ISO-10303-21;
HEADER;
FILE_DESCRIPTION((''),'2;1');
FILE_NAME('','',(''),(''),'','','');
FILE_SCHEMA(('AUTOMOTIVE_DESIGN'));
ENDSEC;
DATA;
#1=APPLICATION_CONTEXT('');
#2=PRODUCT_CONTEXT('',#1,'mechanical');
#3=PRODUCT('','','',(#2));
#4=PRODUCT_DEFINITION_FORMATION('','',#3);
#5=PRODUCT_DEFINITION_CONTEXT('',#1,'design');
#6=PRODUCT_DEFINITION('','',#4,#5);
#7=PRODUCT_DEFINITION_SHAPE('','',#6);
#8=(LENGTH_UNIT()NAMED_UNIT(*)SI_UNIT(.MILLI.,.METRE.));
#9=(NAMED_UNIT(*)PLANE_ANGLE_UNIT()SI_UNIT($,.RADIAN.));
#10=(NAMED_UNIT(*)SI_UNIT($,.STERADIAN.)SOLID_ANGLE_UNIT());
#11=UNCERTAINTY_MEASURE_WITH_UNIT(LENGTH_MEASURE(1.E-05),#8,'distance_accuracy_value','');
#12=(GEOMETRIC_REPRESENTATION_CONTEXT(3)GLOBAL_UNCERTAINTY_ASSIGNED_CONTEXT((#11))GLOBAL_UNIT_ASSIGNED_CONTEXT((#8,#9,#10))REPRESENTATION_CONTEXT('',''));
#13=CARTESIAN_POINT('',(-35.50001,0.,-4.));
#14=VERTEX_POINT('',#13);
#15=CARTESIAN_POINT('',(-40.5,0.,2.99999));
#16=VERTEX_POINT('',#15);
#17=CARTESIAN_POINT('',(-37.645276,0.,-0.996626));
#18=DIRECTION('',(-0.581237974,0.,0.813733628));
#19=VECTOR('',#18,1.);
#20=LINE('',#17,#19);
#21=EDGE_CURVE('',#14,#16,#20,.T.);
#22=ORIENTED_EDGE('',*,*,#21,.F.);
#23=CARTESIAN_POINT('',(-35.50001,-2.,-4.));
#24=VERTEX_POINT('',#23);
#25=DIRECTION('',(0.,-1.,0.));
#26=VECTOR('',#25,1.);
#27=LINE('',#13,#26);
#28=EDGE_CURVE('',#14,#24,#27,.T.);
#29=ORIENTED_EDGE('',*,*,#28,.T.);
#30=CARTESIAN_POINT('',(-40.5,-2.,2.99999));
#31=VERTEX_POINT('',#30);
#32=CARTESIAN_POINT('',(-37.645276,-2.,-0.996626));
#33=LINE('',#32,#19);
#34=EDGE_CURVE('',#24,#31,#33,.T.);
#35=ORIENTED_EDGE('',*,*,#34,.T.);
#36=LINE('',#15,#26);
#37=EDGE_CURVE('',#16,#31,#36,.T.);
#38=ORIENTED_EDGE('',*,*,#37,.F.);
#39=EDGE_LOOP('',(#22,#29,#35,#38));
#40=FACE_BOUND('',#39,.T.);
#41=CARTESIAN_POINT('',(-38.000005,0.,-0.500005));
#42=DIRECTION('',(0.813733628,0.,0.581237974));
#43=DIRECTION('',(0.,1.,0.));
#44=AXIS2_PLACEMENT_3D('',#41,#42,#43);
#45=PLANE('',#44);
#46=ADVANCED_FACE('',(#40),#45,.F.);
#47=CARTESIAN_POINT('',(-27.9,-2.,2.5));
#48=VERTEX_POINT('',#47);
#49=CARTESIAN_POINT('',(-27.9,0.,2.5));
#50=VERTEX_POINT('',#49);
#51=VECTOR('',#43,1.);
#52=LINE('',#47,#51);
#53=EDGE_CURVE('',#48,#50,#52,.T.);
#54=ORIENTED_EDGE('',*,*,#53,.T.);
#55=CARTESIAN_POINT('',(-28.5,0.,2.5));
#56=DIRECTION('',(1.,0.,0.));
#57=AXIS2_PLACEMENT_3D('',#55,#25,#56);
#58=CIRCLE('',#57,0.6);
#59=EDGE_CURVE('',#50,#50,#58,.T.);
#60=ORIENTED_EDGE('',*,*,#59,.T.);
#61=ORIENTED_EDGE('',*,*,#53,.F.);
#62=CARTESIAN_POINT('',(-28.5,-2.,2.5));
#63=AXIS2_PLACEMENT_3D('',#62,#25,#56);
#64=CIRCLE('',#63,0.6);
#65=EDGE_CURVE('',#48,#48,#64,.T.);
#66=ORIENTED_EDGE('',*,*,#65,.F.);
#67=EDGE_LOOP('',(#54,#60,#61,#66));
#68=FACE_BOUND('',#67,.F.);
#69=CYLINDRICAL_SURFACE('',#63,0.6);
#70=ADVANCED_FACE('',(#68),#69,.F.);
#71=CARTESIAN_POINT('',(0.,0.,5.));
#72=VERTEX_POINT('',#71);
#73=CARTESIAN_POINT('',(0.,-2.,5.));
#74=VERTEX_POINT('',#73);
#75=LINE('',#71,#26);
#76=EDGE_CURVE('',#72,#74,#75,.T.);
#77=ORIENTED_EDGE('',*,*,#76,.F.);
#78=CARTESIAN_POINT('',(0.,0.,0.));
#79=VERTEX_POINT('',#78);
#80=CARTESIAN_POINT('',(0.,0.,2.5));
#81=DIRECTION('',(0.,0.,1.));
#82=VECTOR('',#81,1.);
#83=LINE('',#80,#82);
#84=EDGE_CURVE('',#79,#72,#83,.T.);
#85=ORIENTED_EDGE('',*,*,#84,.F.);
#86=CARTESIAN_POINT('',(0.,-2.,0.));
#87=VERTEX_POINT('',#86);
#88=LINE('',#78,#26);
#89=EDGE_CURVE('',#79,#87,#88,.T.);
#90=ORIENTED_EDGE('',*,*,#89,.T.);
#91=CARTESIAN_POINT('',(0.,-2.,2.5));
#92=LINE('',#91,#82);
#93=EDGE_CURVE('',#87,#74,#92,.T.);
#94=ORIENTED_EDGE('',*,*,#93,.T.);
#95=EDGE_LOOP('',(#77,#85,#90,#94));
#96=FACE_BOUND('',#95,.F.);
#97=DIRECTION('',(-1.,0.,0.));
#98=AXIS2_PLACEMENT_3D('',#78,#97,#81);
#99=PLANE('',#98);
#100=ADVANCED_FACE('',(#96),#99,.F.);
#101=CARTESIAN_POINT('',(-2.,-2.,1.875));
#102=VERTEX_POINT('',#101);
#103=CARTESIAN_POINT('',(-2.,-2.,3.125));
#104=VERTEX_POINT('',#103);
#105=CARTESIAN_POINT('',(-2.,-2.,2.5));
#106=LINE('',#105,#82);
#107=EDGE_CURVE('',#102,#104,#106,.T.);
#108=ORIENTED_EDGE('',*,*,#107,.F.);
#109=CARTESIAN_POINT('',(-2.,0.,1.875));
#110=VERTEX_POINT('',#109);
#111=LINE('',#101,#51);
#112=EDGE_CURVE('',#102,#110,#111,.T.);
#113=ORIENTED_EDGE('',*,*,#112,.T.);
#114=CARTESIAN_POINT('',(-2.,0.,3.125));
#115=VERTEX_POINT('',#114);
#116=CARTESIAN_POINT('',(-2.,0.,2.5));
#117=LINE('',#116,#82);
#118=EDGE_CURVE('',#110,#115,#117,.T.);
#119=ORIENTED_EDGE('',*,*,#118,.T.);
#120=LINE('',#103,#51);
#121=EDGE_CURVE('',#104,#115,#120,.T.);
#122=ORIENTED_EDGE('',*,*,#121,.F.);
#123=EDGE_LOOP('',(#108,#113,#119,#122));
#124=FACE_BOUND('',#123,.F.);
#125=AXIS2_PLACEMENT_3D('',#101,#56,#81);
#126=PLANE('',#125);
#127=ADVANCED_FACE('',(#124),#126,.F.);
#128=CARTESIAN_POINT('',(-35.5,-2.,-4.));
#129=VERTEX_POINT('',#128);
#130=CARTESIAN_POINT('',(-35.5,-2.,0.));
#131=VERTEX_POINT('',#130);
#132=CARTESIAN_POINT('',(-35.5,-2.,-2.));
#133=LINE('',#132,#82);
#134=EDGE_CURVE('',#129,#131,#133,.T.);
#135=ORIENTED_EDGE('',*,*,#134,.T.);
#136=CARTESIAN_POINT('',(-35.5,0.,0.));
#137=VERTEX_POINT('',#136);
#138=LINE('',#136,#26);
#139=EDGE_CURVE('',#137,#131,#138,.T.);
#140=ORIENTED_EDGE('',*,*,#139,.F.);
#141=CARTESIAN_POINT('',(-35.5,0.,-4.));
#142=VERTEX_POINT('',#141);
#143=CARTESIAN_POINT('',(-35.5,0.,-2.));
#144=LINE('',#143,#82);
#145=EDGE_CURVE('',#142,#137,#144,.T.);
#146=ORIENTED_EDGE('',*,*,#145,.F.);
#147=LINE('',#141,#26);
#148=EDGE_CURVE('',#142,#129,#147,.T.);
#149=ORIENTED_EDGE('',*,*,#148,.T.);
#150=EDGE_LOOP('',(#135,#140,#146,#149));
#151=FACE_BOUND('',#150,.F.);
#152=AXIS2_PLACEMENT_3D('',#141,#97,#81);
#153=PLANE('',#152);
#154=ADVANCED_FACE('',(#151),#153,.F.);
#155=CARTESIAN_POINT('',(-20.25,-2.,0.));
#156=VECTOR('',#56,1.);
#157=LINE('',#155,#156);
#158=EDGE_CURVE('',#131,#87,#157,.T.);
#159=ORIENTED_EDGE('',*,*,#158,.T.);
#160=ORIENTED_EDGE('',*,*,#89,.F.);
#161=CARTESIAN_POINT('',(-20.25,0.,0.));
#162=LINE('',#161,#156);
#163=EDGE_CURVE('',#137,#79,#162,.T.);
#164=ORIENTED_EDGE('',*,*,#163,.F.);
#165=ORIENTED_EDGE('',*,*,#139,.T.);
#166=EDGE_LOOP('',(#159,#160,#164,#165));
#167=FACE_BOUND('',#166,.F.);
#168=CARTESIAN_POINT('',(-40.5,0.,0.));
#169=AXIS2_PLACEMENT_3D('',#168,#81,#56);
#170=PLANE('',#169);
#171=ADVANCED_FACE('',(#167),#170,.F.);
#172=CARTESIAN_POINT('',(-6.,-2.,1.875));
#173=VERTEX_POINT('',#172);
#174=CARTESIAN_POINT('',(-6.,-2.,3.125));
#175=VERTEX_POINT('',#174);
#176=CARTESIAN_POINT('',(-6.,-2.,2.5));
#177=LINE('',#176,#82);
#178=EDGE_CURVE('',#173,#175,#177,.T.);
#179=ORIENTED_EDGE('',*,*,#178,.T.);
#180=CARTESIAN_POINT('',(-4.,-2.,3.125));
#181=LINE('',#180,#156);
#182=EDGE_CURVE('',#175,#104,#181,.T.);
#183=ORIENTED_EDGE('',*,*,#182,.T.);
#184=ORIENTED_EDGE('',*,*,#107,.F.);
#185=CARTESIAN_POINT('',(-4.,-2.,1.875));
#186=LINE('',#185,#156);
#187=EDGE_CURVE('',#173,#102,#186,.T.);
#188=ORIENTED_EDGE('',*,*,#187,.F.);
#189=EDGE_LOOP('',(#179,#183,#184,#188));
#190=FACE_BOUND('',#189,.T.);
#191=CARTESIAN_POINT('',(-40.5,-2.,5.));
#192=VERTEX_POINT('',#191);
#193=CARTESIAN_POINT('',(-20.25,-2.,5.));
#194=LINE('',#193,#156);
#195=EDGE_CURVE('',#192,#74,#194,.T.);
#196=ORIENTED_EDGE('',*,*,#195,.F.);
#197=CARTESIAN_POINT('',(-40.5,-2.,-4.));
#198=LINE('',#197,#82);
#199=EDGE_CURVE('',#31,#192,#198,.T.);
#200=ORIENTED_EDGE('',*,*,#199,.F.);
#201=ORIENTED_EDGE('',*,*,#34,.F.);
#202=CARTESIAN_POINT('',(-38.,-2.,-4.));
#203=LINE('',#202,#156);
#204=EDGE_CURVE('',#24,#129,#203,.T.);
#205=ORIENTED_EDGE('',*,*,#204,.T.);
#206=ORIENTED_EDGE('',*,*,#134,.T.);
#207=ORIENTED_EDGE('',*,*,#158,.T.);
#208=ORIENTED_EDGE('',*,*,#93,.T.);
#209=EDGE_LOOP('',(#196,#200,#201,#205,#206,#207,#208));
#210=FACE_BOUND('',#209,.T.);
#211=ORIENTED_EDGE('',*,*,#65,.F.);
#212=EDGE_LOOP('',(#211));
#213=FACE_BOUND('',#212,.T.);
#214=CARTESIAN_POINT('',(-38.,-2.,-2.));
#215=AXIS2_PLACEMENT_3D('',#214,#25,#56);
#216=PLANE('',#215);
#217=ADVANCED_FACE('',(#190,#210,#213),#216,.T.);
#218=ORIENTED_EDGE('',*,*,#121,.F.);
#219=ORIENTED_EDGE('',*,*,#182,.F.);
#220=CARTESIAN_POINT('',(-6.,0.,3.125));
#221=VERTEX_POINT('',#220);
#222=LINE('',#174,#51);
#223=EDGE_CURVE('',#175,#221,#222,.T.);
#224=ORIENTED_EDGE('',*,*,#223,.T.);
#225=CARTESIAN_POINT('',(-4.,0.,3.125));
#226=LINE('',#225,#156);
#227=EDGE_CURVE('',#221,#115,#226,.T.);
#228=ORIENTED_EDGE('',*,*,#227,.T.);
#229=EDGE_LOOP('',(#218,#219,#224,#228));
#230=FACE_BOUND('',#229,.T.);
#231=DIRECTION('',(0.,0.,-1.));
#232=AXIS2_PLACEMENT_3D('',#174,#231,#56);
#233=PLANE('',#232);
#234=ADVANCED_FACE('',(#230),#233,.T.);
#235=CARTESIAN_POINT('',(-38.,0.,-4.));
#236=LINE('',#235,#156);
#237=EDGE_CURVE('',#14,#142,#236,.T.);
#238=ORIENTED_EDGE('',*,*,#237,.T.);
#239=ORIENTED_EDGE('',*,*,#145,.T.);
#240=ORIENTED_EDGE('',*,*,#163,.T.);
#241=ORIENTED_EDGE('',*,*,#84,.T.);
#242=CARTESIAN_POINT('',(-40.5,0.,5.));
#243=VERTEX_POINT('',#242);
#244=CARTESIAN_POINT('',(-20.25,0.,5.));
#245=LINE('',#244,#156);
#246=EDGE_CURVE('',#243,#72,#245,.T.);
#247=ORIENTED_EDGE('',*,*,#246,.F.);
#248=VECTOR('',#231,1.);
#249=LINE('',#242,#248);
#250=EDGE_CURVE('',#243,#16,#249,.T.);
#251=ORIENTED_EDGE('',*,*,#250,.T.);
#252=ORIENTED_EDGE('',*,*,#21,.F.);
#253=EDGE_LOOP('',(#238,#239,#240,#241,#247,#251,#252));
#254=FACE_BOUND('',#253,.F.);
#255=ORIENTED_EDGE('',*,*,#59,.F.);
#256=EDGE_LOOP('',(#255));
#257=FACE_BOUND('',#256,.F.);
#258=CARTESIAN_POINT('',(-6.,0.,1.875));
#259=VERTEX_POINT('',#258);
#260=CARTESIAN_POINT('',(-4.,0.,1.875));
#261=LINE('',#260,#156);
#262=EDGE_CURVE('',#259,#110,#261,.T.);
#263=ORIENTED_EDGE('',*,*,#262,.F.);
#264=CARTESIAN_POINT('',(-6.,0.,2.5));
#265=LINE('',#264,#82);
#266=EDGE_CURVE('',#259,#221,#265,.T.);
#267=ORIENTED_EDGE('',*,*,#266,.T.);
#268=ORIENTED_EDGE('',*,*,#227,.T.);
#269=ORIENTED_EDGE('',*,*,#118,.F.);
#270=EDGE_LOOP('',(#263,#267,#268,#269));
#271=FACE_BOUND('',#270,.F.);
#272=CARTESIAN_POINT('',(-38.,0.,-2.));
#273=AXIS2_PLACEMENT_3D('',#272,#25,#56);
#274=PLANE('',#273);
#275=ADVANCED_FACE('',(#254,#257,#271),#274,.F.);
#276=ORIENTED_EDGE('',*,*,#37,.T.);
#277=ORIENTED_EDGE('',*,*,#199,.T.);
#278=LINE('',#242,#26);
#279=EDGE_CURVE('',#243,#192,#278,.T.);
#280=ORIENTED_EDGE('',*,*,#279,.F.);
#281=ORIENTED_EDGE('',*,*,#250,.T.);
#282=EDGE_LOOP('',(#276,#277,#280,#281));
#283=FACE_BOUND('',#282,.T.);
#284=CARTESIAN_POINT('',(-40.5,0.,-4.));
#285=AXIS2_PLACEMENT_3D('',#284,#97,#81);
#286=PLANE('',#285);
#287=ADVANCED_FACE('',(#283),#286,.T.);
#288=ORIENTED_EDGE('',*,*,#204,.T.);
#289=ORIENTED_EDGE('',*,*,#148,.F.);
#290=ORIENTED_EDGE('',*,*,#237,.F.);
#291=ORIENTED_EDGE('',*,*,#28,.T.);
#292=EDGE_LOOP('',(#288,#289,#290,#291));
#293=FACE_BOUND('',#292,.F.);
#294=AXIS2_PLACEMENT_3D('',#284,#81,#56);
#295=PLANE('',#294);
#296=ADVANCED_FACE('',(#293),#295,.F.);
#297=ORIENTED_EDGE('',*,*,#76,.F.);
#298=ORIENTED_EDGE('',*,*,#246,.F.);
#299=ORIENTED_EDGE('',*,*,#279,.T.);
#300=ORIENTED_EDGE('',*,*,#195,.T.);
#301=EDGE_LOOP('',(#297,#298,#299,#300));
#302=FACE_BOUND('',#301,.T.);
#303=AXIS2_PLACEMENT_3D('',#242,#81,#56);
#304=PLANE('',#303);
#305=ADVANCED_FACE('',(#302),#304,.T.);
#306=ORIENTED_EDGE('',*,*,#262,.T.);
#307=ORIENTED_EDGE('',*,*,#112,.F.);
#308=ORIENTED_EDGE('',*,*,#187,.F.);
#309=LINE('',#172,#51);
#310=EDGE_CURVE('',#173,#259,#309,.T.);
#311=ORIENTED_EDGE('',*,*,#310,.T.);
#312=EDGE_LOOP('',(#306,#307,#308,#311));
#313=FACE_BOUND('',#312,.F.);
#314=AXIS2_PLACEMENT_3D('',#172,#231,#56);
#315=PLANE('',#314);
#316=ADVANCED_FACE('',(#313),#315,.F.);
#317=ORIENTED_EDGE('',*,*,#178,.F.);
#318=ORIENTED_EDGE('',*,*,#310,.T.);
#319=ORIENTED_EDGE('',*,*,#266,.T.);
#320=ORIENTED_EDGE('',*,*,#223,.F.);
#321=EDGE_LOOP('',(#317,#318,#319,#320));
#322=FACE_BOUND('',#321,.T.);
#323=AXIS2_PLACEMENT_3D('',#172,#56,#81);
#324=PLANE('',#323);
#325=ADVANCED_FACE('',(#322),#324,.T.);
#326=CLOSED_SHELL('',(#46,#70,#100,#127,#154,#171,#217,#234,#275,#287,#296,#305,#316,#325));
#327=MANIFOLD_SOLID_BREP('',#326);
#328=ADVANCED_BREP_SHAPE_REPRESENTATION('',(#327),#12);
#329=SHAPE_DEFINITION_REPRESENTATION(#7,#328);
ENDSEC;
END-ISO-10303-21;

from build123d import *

# Parameters (mm, degrees)
F0_W     = 40.5
F0_H     = 5
F1_DEPTH = 2
F2_W     = 5
F2_H     = 4
F3_DEPTH = 2
F4_SIZE2 = 6.99999
F4_SIZE  = 4.99999
F5_W     = 4
F5_H     = 1.25
F6_DEPTH = 2
F7_R     = 0.6
F8_DEPTH = 2


# Not quite as in the source:
# - a fillet or chamfer is up to 0.001 mm smaller than in the source, because OpenCascade refuses the exact size


with BuildPart() as f1:
    # F0 (on Front) → F1 (new body)
    with BuildSketch(Plane.XZ):
        with Locations((-20.25, 2.5)):
            Rectangle(F0_W, F0_H)
    extrude(amount=F1_DEPTH)

    # F2 (on Front) → F3 (join)
    with BuildSketch(Plane.XZ):
        with Locations((-38, -2)):
            Rectangle(F2_W, F2_H)
    extrude(amount=F3_DEPTH)

    # F4 (size 5 and 7 in the source; OpenCascade refuses exactly that, so slightly less here)
    f4_edges = [f1.edges().sort_by_distance(p)[0] for p in [
        (-40.5, -1, -4),
    ]]
    f4_side = f1.faces().sort_by_distance((-38, -1, -4))[0]
    chamfer(f4_edges, length=F4_SIZE, length2=F4_SIZE2, reference=f4_side)

    # F5 (on face) → F6 (cut)
    with BuildSketch(Plane.XZ.offset(2)):
        with Locations((-4, 2.5)):
            Rectangle(F5_W, F5_H)
    extrude(amount=-F6_DEPTH, mode=Mode.SUBTRACT)

    # F7 (on face) → F8 (cut)
    with BuildSketch(Plane.XZ.offset(2)):
        with Locations((-28.5, 2.5)):
            Circle(F7_R)
    extrude(amount=-F8_DEPTH, mode=Mode.SUBTRACT)


solid = f1.part
